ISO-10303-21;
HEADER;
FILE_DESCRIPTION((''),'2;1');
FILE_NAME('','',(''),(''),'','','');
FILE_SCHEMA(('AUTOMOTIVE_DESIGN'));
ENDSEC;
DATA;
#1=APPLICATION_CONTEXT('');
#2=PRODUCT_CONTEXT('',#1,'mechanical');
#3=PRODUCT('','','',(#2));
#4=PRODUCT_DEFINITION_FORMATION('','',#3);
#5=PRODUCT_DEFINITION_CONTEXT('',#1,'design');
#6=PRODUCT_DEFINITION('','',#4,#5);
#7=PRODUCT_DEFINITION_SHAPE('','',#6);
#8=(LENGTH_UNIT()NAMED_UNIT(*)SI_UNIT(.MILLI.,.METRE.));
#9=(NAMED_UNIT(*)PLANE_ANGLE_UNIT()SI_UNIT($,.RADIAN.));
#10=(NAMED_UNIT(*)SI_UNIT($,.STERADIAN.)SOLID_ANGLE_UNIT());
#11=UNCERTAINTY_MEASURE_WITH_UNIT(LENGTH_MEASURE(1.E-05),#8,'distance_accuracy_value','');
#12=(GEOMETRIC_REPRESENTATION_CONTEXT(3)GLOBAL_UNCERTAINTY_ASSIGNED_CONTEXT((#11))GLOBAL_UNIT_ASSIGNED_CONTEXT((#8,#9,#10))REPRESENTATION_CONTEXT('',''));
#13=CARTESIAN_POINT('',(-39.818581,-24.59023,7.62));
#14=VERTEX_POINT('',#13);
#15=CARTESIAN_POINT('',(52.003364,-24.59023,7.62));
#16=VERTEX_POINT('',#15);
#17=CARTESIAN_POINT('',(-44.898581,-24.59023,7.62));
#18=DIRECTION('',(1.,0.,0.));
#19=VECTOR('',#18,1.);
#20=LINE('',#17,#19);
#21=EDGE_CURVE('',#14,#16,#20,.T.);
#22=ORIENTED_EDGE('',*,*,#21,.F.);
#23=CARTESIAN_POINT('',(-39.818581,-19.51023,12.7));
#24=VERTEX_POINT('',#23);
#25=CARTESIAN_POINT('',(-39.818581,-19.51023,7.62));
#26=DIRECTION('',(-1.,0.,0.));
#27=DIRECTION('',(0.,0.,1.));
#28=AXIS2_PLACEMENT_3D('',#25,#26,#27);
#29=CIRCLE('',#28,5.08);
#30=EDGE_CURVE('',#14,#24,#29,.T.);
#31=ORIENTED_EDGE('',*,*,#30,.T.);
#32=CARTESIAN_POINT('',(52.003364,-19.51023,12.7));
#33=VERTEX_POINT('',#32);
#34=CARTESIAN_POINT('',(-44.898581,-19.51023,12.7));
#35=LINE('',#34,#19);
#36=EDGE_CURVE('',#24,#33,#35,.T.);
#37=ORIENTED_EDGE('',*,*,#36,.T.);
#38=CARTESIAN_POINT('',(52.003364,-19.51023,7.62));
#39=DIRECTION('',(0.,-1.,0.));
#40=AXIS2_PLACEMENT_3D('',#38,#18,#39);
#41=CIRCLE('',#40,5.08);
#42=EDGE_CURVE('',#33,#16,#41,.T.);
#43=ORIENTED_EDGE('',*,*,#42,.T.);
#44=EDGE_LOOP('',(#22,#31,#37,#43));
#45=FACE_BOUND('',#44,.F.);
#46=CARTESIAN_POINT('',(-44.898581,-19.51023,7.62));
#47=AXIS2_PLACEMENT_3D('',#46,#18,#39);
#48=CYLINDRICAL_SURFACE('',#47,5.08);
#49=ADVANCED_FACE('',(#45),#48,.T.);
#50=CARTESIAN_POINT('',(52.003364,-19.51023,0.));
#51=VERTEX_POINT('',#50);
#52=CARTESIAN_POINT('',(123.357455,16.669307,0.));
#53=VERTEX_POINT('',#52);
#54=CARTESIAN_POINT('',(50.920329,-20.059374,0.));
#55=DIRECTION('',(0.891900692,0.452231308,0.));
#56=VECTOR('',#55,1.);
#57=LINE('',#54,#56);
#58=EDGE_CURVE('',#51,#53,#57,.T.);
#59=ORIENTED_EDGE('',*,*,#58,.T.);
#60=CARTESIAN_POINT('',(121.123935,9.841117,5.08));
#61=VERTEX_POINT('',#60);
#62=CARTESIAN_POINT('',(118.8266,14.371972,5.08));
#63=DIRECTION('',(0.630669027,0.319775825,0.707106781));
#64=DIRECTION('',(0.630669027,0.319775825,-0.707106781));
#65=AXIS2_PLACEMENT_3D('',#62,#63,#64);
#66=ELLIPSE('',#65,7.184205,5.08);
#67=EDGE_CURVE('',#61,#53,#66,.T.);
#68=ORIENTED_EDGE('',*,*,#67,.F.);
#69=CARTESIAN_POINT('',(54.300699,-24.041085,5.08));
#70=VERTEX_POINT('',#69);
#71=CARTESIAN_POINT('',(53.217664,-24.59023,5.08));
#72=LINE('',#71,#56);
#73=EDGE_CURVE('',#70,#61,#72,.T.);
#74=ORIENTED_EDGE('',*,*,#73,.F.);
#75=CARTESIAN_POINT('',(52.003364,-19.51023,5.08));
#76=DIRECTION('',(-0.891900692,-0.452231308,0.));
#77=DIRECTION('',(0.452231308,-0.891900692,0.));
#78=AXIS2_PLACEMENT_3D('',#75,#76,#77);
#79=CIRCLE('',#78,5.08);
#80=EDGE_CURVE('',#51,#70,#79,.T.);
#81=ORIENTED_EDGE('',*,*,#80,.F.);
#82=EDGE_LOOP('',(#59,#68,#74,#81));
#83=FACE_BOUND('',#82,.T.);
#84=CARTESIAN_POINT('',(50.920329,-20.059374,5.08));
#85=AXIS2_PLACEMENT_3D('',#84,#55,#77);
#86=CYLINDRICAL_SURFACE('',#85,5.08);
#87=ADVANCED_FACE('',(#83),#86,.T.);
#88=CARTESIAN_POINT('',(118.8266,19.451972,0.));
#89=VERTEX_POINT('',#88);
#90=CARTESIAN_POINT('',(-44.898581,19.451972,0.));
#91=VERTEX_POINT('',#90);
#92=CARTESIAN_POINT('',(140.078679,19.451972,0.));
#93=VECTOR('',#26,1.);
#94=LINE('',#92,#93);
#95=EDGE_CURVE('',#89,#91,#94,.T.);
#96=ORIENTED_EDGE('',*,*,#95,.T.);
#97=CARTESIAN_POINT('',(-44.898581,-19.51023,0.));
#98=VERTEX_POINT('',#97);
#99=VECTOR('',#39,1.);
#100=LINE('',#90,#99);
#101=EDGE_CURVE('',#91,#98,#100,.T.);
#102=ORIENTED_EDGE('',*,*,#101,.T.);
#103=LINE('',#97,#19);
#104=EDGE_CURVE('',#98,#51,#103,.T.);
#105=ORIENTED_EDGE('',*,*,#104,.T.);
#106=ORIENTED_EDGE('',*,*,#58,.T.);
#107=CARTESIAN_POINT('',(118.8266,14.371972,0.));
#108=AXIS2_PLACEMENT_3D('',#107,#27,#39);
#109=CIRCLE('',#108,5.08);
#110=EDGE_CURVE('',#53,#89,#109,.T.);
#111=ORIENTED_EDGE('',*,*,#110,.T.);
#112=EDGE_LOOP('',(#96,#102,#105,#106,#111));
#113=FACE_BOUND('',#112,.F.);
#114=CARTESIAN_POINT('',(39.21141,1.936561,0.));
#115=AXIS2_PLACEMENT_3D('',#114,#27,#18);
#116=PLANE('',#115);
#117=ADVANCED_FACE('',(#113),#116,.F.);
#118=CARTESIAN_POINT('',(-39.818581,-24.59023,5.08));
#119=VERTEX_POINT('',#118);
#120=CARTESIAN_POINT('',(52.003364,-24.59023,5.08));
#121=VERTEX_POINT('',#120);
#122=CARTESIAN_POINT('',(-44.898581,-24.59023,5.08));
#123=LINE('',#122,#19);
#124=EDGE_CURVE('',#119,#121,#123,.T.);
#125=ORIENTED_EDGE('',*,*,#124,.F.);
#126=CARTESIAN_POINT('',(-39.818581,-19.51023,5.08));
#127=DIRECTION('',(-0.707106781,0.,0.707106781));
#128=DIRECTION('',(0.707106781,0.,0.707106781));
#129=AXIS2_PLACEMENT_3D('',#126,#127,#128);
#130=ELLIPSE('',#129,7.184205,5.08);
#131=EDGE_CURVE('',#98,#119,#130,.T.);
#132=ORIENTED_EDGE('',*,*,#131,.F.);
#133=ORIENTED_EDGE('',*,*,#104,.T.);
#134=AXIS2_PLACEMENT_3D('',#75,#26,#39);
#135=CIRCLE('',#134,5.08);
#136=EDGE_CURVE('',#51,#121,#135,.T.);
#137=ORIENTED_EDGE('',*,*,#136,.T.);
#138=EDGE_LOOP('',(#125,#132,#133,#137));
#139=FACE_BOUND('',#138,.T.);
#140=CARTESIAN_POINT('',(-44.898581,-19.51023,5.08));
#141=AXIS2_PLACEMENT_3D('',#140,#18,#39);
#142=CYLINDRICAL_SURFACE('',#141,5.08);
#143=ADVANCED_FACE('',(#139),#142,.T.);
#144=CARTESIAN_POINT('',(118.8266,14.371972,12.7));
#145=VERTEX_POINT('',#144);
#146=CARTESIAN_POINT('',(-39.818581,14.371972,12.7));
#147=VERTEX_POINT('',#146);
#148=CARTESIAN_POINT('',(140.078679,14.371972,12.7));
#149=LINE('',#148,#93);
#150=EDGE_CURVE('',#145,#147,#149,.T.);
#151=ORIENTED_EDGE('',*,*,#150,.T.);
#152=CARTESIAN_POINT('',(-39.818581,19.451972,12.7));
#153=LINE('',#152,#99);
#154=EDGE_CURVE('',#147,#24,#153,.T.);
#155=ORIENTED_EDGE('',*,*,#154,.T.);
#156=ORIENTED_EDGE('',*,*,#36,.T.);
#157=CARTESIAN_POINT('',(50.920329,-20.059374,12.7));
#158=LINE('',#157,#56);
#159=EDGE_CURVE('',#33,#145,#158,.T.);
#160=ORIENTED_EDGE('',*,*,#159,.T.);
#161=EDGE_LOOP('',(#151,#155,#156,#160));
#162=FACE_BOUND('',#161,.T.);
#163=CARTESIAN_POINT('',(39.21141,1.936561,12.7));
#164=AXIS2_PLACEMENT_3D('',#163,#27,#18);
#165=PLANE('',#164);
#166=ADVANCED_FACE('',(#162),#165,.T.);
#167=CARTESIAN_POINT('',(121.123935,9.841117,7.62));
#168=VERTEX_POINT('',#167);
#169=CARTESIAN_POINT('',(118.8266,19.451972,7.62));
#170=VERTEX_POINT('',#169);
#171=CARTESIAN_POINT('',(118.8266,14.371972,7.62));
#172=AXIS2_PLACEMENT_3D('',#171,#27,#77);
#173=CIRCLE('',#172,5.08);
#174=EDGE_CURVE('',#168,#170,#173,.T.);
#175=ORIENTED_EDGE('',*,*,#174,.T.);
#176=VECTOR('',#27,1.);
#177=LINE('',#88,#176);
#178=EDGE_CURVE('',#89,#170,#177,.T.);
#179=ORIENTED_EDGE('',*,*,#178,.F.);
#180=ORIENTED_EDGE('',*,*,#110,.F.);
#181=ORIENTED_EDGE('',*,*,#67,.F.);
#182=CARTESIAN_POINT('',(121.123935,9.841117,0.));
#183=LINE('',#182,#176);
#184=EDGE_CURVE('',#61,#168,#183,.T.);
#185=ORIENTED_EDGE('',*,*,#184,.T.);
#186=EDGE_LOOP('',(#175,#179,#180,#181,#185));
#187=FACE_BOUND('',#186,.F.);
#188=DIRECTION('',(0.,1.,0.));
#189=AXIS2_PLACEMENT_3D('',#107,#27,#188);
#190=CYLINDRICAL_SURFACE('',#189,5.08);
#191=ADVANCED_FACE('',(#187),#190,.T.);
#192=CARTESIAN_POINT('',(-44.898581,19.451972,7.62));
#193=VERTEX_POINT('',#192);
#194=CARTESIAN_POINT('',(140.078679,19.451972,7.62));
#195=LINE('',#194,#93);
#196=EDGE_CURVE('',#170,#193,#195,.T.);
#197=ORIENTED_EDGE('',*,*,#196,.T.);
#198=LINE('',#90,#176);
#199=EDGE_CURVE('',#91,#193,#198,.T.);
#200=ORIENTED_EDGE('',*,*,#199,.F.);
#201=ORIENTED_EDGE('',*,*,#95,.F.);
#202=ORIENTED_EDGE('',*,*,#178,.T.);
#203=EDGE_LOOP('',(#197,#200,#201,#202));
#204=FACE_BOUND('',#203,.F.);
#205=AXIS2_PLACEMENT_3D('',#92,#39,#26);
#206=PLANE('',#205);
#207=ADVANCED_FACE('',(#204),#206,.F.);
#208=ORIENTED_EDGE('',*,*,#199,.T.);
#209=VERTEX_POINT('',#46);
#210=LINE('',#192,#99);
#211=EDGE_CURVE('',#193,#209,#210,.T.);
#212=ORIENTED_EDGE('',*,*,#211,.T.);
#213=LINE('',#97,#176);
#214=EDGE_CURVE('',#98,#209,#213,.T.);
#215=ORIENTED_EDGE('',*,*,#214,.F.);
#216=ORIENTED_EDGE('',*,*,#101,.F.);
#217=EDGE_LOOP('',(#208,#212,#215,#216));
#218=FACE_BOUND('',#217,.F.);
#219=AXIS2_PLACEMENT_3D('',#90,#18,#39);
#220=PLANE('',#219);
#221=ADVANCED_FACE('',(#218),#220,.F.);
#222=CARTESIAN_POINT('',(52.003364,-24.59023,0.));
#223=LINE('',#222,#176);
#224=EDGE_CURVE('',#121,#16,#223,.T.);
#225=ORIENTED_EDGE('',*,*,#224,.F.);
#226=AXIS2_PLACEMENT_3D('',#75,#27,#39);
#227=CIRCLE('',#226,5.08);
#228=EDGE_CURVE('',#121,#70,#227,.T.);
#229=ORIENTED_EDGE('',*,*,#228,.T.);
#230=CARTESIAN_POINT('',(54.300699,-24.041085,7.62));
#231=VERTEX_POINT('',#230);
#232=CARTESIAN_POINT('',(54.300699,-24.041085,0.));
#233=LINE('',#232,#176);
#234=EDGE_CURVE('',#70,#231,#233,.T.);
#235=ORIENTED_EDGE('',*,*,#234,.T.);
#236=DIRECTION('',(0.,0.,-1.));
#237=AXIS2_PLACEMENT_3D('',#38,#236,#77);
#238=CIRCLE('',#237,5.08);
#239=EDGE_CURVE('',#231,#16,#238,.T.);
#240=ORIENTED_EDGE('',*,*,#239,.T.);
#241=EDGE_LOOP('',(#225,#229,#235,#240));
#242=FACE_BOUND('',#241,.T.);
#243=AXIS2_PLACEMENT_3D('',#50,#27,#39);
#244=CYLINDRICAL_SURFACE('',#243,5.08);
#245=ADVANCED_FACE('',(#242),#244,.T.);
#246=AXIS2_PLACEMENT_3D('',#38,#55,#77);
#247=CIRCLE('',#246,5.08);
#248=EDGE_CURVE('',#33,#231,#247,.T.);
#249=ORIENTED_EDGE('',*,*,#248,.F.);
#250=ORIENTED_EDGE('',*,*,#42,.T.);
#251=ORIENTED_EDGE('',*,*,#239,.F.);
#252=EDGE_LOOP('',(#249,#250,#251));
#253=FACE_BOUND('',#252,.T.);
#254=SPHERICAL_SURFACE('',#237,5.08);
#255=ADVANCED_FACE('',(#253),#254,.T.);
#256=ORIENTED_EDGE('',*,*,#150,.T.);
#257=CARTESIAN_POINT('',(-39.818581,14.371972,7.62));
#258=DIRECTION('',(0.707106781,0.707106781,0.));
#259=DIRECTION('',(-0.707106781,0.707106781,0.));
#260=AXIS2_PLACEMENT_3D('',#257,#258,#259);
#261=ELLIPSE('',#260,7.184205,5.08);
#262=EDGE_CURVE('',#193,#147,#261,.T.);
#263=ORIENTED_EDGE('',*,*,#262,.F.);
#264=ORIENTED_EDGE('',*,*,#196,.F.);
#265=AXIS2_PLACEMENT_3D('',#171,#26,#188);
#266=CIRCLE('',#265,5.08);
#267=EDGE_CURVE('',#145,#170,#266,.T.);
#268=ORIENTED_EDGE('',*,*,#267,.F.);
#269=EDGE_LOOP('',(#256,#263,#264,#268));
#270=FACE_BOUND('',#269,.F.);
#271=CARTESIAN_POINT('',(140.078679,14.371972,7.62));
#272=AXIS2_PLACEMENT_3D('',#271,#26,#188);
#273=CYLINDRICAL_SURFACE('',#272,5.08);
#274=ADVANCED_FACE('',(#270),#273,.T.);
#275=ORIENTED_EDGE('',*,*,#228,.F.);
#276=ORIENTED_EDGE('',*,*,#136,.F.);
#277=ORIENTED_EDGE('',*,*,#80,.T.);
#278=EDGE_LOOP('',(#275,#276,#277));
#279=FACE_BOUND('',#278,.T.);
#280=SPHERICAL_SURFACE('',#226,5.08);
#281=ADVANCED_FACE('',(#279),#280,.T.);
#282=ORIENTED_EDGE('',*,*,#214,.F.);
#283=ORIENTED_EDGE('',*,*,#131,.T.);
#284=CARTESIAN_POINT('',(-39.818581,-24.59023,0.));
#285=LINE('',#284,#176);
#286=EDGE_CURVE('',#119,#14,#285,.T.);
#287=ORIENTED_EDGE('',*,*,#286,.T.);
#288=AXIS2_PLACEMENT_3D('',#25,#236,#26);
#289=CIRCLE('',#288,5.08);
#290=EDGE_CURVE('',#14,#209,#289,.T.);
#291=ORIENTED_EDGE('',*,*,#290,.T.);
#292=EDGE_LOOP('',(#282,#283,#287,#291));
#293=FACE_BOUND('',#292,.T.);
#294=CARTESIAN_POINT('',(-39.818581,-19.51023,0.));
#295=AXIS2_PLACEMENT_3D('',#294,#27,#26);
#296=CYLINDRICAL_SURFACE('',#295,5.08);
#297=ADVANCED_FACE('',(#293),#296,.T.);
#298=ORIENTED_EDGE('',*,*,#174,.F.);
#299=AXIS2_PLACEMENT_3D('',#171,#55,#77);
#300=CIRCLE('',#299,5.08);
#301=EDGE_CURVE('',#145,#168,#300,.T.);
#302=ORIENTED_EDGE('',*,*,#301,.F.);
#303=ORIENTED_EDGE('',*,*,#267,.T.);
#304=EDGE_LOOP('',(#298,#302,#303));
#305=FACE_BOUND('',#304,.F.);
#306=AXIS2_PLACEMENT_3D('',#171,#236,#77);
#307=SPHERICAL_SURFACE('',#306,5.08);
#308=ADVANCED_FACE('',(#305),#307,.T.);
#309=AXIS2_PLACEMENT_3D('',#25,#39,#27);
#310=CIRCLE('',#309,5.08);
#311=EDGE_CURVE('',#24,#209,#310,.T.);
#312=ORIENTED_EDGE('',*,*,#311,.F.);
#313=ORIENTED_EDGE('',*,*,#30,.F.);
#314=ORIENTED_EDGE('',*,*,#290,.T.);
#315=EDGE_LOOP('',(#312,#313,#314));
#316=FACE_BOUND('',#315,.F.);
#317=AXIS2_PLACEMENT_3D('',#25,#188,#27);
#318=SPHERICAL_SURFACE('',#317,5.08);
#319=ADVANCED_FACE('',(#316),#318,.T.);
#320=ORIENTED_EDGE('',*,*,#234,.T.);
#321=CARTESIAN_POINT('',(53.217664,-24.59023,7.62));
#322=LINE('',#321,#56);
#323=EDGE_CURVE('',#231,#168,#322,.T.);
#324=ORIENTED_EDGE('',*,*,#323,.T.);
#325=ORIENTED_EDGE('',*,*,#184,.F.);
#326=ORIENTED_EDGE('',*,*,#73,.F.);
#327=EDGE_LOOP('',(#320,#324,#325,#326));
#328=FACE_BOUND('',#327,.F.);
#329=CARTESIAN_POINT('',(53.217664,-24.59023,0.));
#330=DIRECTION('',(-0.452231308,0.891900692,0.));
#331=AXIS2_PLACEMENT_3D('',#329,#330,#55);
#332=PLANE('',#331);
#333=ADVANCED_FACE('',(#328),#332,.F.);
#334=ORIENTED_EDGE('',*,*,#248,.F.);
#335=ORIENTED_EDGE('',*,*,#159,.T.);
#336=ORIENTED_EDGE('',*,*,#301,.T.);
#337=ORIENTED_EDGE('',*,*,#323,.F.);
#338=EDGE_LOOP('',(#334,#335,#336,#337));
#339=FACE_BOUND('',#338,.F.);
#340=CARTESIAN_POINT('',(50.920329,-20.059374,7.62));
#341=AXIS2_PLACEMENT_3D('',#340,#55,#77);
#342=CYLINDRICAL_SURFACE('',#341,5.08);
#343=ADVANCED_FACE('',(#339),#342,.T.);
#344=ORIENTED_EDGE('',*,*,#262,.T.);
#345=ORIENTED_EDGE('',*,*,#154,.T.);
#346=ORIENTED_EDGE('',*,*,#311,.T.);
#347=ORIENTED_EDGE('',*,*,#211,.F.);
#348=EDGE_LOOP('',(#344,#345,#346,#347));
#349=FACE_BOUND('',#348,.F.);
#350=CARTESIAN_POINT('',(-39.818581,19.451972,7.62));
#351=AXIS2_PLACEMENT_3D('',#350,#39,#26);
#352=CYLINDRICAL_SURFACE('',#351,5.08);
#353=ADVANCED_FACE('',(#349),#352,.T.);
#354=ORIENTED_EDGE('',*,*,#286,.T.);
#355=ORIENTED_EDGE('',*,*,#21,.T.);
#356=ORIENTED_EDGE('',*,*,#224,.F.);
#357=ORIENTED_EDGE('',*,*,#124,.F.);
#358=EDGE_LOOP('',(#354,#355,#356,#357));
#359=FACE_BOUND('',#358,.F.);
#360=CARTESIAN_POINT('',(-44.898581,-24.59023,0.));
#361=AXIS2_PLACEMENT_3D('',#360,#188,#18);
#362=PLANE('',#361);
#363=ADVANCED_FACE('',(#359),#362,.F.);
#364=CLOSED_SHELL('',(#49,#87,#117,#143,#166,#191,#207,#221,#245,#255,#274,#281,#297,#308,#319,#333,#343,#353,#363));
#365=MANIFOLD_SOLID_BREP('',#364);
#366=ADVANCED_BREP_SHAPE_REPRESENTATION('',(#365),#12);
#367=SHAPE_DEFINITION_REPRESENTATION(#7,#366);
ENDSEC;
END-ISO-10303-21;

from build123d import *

# Parameters (mm, degrees)
F1_DEPTH = 12.7
F2_R     = 5.08


# Not quite as in the source:
# - the program builds the solid bodies; features that only make, move or delete a surface that nothing else refers to are left out


with BuildPart() as f1:
    # F0 (on Top) → F1 (new body)
    with BuildSketch(Plane.XY):
        Polygon((140.0786787271, 19.4519720972), (-44.8985807598, 19.4519720972), (-44.8985807598, -24.5902296156), (53.217664361, -24.5902296156), align=None)
    extrude(amount=F1_DEPTH)

    # F2
    f2_edges = [f1.edges().sort_by_distance(p)[0] for p in [
        (96.648172, -2.569129, 12.7),
        (47.590049, 19.451972, 12.7),
        (-44.898581, -2.569129, 12.7),
        (4.159542, -24.59023, 12.7),
        (-44.898581, -24.59023, 6.35),
        (53.217664, -24.59023, 6.35),
        (4.159542, -24.59023, 0),
        (140.078679, 19.451972, 6.35),
        (96.648172, -2.569129, 0),
    ]]
    fillet(f2_edges, radius=F2_R)


solid = f1.part
